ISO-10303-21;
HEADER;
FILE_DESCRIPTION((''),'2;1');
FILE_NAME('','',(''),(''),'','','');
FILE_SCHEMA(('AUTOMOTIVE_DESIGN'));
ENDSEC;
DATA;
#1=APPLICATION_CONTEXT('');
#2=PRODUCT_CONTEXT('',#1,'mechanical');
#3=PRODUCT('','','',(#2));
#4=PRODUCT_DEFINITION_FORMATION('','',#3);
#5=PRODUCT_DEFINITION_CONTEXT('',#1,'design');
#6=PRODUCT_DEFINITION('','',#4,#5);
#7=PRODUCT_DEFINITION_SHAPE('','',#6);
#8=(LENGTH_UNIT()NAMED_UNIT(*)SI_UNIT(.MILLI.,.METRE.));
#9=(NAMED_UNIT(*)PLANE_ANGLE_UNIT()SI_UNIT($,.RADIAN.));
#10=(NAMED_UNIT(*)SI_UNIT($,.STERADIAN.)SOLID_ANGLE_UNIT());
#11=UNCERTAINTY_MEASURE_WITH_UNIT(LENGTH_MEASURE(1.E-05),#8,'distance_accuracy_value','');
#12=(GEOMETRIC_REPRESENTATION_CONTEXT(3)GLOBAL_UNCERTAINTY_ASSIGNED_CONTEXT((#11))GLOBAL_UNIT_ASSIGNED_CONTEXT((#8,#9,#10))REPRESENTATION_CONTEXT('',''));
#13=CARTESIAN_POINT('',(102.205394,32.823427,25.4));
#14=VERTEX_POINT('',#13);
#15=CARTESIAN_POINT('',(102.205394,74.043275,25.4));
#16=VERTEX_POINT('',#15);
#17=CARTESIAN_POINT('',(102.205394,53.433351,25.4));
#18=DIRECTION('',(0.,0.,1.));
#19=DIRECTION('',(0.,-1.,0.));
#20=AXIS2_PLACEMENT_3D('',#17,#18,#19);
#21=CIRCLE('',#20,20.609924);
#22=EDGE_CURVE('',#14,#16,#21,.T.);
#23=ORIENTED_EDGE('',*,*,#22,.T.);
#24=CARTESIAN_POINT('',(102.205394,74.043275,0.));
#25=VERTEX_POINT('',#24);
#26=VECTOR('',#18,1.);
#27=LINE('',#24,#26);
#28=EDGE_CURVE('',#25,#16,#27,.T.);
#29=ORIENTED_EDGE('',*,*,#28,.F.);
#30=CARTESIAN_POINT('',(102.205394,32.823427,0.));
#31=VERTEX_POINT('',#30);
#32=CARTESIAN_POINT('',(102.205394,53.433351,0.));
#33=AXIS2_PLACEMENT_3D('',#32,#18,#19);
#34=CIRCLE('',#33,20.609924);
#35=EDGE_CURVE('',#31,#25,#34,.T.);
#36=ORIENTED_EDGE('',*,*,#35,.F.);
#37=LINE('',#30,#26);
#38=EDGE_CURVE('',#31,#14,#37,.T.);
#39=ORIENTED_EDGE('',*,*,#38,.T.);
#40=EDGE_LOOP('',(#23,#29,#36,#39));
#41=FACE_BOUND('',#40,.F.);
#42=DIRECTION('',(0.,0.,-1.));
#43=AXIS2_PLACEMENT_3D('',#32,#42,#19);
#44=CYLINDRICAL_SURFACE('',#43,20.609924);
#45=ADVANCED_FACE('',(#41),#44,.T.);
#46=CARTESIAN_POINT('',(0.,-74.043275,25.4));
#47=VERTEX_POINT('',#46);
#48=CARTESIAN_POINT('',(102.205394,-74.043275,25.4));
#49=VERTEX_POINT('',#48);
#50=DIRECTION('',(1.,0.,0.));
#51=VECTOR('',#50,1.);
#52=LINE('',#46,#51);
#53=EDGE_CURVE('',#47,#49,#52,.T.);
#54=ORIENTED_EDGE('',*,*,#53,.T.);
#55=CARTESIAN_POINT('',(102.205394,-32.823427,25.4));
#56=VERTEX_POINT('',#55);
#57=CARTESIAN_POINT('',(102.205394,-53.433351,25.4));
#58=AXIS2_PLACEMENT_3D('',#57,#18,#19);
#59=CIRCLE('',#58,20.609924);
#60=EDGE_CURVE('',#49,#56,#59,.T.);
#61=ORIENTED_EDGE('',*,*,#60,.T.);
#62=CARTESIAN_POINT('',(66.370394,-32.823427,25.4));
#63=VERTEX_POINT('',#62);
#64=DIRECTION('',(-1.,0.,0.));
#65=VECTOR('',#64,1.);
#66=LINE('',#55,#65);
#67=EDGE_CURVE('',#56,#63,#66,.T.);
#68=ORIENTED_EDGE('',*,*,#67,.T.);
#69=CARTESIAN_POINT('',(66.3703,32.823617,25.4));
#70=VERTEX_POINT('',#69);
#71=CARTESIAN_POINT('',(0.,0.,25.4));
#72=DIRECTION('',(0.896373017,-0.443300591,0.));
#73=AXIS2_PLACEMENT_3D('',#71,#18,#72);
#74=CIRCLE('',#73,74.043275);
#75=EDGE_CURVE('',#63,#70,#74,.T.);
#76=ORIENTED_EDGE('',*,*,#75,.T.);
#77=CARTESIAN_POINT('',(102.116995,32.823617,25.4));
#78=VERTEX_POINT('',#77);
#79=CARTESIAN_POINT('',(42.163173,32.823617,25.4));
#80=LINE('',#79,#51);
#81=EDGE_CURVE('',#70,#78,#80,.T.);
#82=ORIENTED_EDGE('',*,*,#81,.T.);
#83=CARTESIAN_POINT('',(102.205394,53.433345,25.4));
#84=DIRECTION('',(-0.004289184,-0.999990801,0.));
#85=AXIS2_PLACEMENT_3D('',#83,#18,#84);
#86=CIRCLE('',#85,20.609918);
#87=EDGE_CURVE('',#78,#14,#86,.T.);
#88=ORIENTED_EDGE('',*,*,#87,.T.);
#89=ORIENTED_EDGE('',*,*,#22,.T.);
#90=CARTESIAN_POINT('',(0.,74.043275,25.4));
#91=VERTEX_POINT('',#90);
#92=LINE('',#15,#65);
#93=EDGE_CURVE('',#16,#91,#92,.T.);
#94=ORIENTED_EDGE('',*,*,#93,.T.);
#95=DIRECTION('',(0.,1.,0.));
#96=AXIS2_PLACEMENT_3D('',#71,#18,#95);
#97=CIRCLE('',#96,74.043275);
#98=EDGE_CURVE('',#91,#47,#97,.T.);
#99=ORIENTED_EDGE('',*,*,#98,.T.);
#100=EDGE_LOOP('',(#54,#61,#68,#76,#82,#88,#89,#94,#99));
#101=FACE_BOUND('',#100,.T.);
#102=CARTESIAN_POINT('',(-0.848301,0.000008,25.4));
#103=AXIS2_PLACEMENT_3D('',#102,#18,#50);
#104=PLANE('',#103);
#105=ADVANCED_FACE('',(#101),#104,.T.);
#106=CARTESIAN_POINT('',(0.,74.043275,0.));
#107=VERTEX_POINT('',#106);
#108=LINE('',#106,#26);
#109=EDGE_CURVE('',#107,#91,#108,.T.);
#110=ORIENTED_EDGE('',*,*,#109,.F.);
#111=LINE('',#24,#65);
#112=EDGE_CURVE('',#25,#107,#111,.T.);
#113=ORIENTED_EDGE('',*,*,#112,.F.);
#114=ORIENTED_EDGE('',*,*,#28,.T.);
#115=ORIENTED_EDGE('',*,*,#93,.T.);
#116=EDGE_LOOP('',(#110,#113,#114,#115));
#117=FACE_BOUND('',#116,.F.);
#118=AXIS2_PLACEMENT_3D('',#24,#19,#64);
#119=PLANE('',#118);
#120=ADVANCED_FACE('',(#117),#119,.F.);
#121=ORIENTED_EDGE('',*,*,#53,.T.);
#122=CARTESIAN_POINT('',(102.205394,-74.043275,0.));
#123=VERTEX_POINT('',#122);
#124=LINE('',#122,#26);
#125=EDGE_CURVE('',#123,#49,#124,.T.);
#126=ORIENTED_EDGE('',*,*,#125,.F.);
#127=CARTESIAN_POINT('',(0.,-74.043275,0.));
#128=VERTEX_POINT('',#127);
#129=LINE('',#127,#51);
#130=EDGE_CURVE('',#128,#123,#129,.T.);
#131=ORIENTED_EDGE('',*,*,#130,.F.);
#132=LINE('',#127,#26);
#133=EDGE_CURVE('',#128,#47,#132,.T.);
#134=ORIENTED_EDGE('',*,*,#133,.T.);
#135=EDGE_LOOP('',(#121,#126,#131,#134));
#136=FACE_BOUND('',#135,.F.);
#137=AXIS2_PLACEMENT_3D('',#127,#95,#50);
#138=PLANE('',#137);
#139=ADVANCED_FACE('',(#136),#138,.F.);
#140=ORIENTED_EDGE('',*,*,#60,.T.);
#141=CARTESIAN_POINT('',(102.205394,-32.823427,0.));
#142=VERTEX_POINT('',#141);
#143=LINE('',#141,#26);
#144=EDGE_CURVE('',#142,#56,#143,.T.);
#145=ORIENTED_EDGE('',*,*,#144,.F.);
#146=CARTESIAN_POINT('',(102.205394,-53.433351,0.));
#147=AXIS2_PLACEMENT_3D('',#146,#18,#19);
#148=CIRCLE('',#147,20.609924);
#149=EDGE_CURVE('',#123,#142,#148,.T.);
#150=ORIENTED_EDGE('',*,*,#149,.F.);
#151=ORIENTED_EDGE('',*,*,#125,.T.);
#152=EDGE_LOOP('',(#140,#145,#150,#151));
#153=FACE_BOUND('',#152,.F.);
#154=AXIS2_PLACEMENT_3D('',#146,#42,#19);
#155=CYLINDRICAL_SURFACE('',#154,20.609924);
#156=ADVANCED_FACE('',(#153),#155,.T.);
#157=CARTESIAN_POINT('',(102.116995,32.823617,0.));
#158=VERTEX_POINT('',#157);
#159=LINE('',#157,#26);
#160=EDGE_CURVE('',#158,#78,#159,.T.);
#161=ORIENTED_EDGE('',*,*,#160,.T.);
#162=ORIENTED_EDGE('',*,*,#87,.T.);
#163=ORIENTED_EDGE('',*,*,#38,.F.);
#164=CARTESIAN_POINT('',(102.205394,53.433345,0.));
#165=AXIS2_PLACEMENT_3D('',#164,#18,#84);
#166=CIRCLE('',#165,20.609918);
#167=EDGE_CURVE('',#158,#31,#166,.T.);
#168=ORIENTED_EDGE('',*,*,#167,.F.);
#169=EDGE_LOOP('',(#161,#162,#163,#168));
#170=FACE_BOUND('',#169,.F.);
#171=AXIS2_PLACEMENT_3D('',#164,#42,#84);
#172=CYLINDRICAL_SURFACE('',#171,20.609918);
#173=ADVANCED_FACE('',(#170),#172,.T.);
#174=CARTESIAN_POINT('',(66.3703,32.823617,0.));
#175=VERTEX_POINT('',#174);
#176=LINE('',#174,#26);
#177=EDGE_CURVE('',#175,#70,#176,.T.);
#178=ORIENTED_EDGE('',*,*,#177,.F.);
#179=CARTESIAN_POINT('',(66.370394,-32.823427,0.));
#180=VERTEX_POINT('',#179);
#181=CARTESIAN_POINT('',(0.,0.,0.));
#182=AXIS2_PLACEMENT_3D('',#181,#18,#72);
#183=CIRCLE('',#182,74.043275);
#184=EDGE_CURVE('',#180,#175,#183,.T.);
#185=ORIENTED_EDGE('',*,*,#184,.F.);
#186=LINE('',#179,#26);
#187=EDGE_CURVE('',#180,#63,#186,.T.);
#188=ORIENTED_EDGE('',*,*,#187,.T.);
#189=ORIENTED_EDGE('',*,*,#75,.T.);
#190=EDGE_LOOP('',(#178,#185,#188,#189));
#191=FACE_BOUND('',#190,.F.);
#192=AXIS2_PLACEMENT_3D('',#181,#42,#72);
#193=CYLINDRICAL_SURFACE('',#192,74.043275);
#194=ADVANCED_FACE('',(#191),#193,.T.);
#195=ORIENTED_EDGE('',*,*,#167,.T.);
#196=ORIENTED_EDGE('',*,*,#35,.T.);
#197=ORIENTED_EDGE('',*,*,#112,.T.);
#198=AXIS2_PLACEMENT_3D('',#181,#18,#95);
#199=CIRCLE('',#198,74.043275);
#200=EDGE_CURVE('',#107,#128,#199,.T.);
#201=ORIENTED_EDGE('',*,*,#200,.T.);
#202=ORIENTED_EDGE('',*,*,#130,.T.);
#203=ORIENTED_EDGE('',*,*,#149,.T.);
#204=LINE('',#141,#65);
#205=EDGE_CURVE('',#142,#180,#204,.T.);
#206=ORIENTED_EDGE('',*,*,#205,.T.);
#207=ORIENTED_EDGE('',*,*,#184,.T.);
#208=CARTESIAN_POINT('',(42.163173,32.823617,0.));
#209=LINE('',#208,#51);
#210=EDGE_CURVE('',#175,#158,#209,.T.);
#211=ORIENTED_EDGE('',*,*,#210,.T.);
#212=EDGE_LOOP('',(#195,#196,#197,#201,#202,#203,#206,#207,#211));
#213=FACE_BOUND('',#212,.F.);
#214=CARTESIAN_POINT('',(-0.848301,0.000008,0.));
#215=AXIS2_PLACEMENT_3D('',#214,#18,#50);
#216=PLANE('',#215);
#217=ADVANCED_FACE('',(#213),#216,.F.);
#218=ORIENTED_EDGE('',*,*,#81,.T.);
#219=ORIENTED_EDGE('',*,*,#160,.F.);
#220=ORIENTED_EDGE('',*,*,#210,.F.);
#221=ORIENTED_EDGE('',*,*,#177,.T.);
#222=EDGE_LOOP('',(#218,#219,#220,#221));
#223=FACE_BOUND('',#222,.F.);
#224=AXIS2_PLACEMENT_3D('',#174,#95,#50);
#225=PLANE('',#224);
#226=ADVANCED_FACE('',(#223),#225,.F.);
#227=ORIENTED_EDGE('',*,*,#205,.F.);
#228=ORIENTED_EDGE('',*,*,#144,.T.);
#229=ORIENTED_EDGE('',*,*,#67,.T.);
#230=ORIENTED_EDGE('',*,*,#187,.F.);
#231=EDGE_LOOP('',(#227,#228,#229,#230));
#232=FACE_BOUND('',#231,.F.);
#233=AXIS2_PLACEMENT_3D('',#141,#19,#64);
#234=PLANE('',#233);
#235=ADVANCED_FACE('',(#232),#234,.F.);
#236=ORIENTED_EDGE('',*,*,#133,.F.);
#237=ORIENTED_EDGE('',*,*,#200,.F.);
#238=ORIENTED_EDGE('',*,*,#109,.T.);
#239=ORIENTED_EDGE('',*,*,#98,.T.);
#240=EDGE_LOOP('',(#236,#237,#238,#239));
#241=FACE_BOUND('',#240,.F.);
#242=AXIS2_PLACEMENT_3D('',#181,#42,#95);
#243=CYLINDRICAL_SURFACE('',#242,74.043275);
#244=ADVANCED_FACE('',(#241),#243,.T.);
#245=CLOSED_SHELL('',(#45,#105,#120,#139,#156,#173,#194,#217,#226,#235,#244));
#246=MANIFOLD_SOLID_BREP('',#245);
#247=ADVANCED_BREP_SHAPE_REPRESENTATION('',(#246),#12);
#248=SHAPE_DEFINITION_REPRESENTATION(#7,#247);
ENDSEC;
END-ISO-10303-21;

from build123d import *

# Parameters (mm, degrees)
F1_DEPTH = 25.4


with BuildPart() as f1:
    # F0 (on Top) → F1 (new body)
    with BuildSketch(Plane.XY):
        with BuildLine():
            ThreePointArc((0.0883997278, 32.8236170641), (-13.058763384, 37.4885196208), (-20.2230135431, 49.4585962042))
            ThreePointArc((-20.2230135431, 49.4585962042), (-53.4333511512, 0), (-20.2230135431, -49.4585962042))
            ThreePointArc((-20.2230135431, -49.4585962042), (-13.0929285798, -37.5165620637), (0, -32.8234274819))
            Line((0, -32.8234274819), (42.1633208321, -32.8234274819))
            ThreePointArc((42.1633208321, -32.8234274819), (50.5373651023, -17.3521682727), (53.4333511512, 0))
            ThreePointArc((53.4333511512, 0), (50.5373260912, 17.3522818904), (42.1631732449, 32.8236170641))
            Line((42.1631732449, 32.8236170641), (0.0883997278, 32.8236170641))
        make_face()
        with BuildLine():
            ThreePointArc((0, -32.8234274819), (-13.0929285798, -37.5165620637), (-20.2230135431, -49.4585962042))
            ThreePointArc((-20.2230135431, -49.4585962042), (-10.3049618346, -52.4302467745), (0, -53.4333511512))
            ThreePointArc((0, -53.4333511512), (10.3049618346, -52.4302467745), (20.2230135431, -49.4585962042))
            ThreePointArc((20.2230135431, -49.4585962042), (13.0929285798, -37.5165620637), (0, -32.8234274819))
        make_face()
        with BuildLine():
            ThreePointArc((0, -32.8234274819), (13.0929285798, -37.5165620637), (20.2230135431, -49.4585962042))
            ThreePointArc((20.2230135431, -49.4585962042), (32.2830588513, -42.5784819651), (42.1633208321, -32.8234274819))
            Line((42.1633208321, -32.8234274819), (0, -32.8234274819))
        make_face()
        with BuildLine():
            Line((0, -53.4333511512), (20.6099236693, -53.4333511512))
            ThreePointArc((20.6099236693, -53.4333511512), (20.5129680829, -51.436580237), (20.2230135431, -49.4585962042))
            ThreePointArc((20.2230135431, -49.4585962042), (10.3049618346, -52.4302467745), (0, -53.4333511512))
        make_face()
        with BuildLine():
            Line((20.6099236693, -53.4333511512), (51.2570339651, -53.4333511512))
            ThreePointArc((51.2570339651, -53.4333511512), (59.7096740135, -43.7854013954), (66.3703936593, -32.8234274819))
            Line((66.3703936593, -32.8234274819), (42.1633208321, -32.8234274819))
            ThreePointArc((42.1633208321, -32.8234274819), (32.2830588513, -42.5784819651), (20.2230135431, -49.4585962042))
            ThreePointArc((20.2230135431, -49.4585962042), (20.5129680829, -51.436580237), (20.6099236693, -53.4333511512))
        make_face()
        with BuildLine():
            ThreePointArc((102.2053944331, -32.8234274819), (87.6319776468, -38.8599343649), (81.5954707638, -53.4333511512))
            Line((81.5954707638, -53.4333511512), (102.2053944331, -53.4333511512))
            Line((102.2053944331, -53.4333511512), (102.2053944331, -32.8234274819))
        make_face()
        with BuildLine():
            ThreePointArc((20.6099236693, 53.4333511512), (14.5734167863, 68.0067679375), (0, 74.0432748205))
            ThreePointArc((0, 74.0432748205), (-15.9167890876, 66.526279731), (-20.2230135431, 49.4585962042))
            ThreePointArc((-20.2230135431, 49.4585962042), (-10.3049618346, 52.4302467745), (0, 53.4333511512))
            Line((0, 53.4333511512), (20.6099236693, 53.4333511512))
        make_face()
        with BuildLine():
            ThreePointArc((51.2570339651, 53.4333511512), (27.6226921414, 68.6978414873), (0, 74.0432748205))
            ThreePointArc((0, 74.0432748205), (14.5734167863, 68.0067679375), (20.6099236693, 53.4333511512))
            Line((20.6099236693, 53.4333511512), (51.2570339651, 53.4333511512))
        make_face()
        with BuildLine():
            ThreePointArc((81.5954707638, -53.4333511512), (87.6319776468, -68.0067679375), (102.2053944331, -74.0432748205))
            Line((102.2053944331, -74.0432748205), (102.2053944331, -53.4333511512))
            Line((102.2053944331, -53.4333511512), (81.5954707638, -53.4333511512))
        make_face()
        with BuildLine():
            Line((102.2053944331, 74.0432748205), (0, 74.0432748205))
            ThreePointArc((0, 74.0432748205), (27.6226921414, 68.6978414873), (51.2570339651, 53.4333511512))
            Line((51.2570339651, 53.4333511512), (81.5954707638, 53.4333511512))
            ThreePointArc((81.5954707638, 53.4333511512), (87.6319776468, 68.0067679375), (102.2053944331, 74.0432748205))
        make_face()
        with BuildLine():
            ThreePointArc((-20.2230135431, -49.4585962042), (-15.9167890876, -66.526279731), (0, -74.0432748205))
            ThreePointArc((0, -74.0432748205), (14.5734167863, -68.0067679375), (20.6099236693, -53.4333511512))
            Line((20.6099236693, -53.4333511512), (0, -53.4333511512))
            ThreePointArc((0, -53.4333511512), (-10.3049618346, -52.4302467745), (-20.2230135431, -49.4585962042))
        make_face()
        with BuildLine():
            ThreePointArc((122.8153181024, 53.4333511512), (116.7788112194, 68.0067679375), (102.2053944331, 74.0432748205))
            Line((102.2053944331, 74.0432748205), (102.2053944331, 53.4333511512))
            Line((102.2053944331, 53.4333511512), (102.2053944331, 32.8236170641))
            Line((102.2053944331, 32.8236170641), (102.2053944331, 32.8234274819))
            ThreePointArc((102.2053944331, 32.8234274819), (116.7788112194, 38.8599343649), (122.8153181024, 53.4333511512))
        make_face()
        with BuildLine():
            Line((102.2053944331, 53.4333511512), (102.2053944331, 74.0432748205))
            ThreePointArc((102.2053944331, 74.0432748205), (87.6319776468, 68.0067679375), (81.5954707638, 53.4333511512))
            Line((81.5954707638, 53.4333511512), (102.2053944331, 53.4333511512))
        make_face()
        with BuildLine():
            ThreePointArc((20.6099236693, -53.4333511512), (14.5734167863, -68.0067679375), (0, -74.0432748205))
            ThreePointArc((0, -74.0432748205), (27.6226921414, -68.6978414873), (51.2570339651, -53.4333511512))
            Line((51.2570339651, -53.4333511512), (20.6099236693, -53.4333511512))
        make_face()
        with BuildLine():
            ThreePointArc((51.2570339651, -53.4333511512), (27.6226921414, -68.6978414873), (0, -74.0432748205))
            Line((0, -74.0432748205), (102.2053944331, -74.0432748205))
            ThreePointArc((102.2053944331, -74.0432748205), (87.6319776468, -68.0067679375), (81.5954707638, -53.4333511512))
            Line((81.5954707638, -53.4333511512), (51.2570339651, -53.4333511512))
        make_face()
        with BuildLine():
            ThreePointArc((-20.2230135431, 49.4585962042), (-15.9167890876, 66.526279731), (0, 74.0432748205))
            ThreePointArc((0, 74.0432748205), (-74.0432748205, 0), (0, -74.0432748205))
            ThreePointArc((0, -74.0432748205), (-15.9167890876, -66.526279731), (-20.2230135431, -49.4585962042))
            ThreePointArc((-20.2230135431, -49.4585962042), (-53.4333511512, 0), (-20.2230135431, 49.4585962042))
        make_face()
        with BuildLine():
            ThreePointArc((66.3703936593, -32.8234274819), (59.7096740135, -43.7854013954), (51.2570339651, -53.4333511512))
            Line((51.2570339651, -53.4333511512), (81.5954707638, -53.4333511512))
            ThreePointArc((81.5954707638, -53.4333511512), (87.6319776468, -38.8599343649), (102.2053944331, -32.8234274819))
            Line((102.2053944331, -32.8234274819), (66.3703936593, -32.8234274819))
        make_face()
        with BuildLine():
            Line((102.2053944331, 32.8236170641), (102.1169947054, 32.8236170641))
            ThreePointArc((102.1169947054, 32.8236170641), (102.1611944676, 32.8234748775), (102.2053944331, 32.8234274819))
            Line((102.2053944331, 32.8234274819), (102.2053944331, 32.8236170641))
        make_face()
        with BuildLine():
            Line((102.2053944331, -53.4333511512), (102.2053944331, -74.0432748205))
            ThreePointArc((102.2053944331, -74.0432748205), (116.7788112194, -68.0067679375), (122.8153181024, -53.4333511512))
            ThreePointArc((122.8153181024, -53.4333511512), (116.7788112194, -38.8599343649), (102.2053944331, -32.8234274819))
            Line((102.2053944331, -32.8234274819), (102.2053944331, -53.4333511512))
        make_face()
        with BuildLine():
            Line((102.2053944331, 53.4333511512), (81.5954707638, 53.4333511512))
            ThreePointArc((81.5954707638, 53.4333511512), (87.6007570653, 38.891221974), (102.1169947054, 32.8236170641))
            Line((102.1169947054, 32.8236170641), (102.2053944331, 32.8236170641))
            Line((102.2053944331, 32.8236170641), (102.2053944331, 53.4333511512))
        make_face()
        with BuildLine():
            Line((81.5954707638, 53.4333511512), (51.2570339651, 53.4333511512))
            ThreePointArc((51.2570339651, 53.4333511512), (59.7096114785, 43.7854866736), (66.3702999012, 32.8236170641))
            Line((66.3702999012, 32.8236170641), (102.1169947054, 32.8236170641))
            ThreePointArc((102.1169947054, 32.8236170641), (87.6007570653, 38.891221974), (81.5954707638, 53.4333511512))
        make_face()
        with BuildLine():
            ThreePointArc((66.3702999012, 32.8236170641), (59.7096114785, 43.7854866736), (51.2570339651, 53.4333511512))
            Line((51.2570339651, 53.4333511512), (20.6099236693, 53.4333511512))
            ThreePointArc((20.6099236693, 53.4333511512), (20.5129680829, 51.436580237), (20.2230135431, 49.4585962042))
            ThreePointArc((20.2230135431, 49.4585962042), (32.2829631266, 42.5785545435), (42.1631732449, 32.8236170641))
            Line((42.1631732449, 32.8236170641), (66.3702999012, 32.8236170641))
        make_face()
        with BuildLine():
            ThreePointArc((20.2230135431, 49.4585962042), (20.5129680829, 51.436580237), (20.6099236693, 53.4333511512))
            Line((20.6099236693, 53.4333511512), (0, 53.4333511512))
            ThreePointArc((0, 53.4333511512), (10.3049618346, 52.4302467745), (20.2230135431, 49.4585962042))
        make_face()
        with BuildLine():
            ThreePointArc((0, 53.4333511512), (-10.3049618346, 52.4302467745), (-20.2230135431, 49.4585962042))
            ThreePointArc((-20.2230135431, 49.4585962042), (-13.058763384, 37.4885196208), (0.0883997278, 32.8236170641))
            ThreePointArc((0.0883997278, 32.8236170641), (13.1270335572, 37.5446777126), (20.2230135431, 49.4585962042))
            ThreePointArc((20.2230135431, 49.4585962042), (10.3049618346, 52.4302467745), (0, 53.4333511512))
        make_face()
        with BuildLine():
            ThreePointArc((74.0432748205, 0), (72.0995176879, 16.8542604501), (66.3702999012, 32.8236170641))
            Line((66.3702999012, 32.8236170641), (42.1631732449, 32.8236170641))
            ThreePointArc((42.1631732449, 32.8236170641), (50.5373260912, 17.3522818904), (53.4333511512, 0))
            Line((53.4333511512, 0), (74.0432748205, 0))
        make_face()
        with BuildLine():
            Line((42.1633208321, -32.8234274819), (66.3703936593, -32.8234274819))
            ThreePointArc((66.3703936593, -32.8234274819), (72.0995417593, -16.8541574765), (74.0432748205, 0))
            Line((74.0432748205, 0), (53.4333511512, 0))
            ThreePointArc((53.4333511512, 0), (50.5373651023, -17.3521682727), (42.1633208321, -32.8234274819))
        make_face()
        with BuildLine():
            ThreePointArc((42.1631732449, 32.8236170641), (32.2829631266, 42.5785545435), (20.2230135431, 49.4585962042))
            ThreePointArc((20.2230135431, 49.4585962042), (13.1270335572, 37.5446777126), (0.0883997278, 32.8236170641))
            Line((0.0883997278, 32.8236170641), (42.1631732449, 32.8236170641))
        make_face()
    extrude(amount=F1_DEPTH)


solid = f1.part
